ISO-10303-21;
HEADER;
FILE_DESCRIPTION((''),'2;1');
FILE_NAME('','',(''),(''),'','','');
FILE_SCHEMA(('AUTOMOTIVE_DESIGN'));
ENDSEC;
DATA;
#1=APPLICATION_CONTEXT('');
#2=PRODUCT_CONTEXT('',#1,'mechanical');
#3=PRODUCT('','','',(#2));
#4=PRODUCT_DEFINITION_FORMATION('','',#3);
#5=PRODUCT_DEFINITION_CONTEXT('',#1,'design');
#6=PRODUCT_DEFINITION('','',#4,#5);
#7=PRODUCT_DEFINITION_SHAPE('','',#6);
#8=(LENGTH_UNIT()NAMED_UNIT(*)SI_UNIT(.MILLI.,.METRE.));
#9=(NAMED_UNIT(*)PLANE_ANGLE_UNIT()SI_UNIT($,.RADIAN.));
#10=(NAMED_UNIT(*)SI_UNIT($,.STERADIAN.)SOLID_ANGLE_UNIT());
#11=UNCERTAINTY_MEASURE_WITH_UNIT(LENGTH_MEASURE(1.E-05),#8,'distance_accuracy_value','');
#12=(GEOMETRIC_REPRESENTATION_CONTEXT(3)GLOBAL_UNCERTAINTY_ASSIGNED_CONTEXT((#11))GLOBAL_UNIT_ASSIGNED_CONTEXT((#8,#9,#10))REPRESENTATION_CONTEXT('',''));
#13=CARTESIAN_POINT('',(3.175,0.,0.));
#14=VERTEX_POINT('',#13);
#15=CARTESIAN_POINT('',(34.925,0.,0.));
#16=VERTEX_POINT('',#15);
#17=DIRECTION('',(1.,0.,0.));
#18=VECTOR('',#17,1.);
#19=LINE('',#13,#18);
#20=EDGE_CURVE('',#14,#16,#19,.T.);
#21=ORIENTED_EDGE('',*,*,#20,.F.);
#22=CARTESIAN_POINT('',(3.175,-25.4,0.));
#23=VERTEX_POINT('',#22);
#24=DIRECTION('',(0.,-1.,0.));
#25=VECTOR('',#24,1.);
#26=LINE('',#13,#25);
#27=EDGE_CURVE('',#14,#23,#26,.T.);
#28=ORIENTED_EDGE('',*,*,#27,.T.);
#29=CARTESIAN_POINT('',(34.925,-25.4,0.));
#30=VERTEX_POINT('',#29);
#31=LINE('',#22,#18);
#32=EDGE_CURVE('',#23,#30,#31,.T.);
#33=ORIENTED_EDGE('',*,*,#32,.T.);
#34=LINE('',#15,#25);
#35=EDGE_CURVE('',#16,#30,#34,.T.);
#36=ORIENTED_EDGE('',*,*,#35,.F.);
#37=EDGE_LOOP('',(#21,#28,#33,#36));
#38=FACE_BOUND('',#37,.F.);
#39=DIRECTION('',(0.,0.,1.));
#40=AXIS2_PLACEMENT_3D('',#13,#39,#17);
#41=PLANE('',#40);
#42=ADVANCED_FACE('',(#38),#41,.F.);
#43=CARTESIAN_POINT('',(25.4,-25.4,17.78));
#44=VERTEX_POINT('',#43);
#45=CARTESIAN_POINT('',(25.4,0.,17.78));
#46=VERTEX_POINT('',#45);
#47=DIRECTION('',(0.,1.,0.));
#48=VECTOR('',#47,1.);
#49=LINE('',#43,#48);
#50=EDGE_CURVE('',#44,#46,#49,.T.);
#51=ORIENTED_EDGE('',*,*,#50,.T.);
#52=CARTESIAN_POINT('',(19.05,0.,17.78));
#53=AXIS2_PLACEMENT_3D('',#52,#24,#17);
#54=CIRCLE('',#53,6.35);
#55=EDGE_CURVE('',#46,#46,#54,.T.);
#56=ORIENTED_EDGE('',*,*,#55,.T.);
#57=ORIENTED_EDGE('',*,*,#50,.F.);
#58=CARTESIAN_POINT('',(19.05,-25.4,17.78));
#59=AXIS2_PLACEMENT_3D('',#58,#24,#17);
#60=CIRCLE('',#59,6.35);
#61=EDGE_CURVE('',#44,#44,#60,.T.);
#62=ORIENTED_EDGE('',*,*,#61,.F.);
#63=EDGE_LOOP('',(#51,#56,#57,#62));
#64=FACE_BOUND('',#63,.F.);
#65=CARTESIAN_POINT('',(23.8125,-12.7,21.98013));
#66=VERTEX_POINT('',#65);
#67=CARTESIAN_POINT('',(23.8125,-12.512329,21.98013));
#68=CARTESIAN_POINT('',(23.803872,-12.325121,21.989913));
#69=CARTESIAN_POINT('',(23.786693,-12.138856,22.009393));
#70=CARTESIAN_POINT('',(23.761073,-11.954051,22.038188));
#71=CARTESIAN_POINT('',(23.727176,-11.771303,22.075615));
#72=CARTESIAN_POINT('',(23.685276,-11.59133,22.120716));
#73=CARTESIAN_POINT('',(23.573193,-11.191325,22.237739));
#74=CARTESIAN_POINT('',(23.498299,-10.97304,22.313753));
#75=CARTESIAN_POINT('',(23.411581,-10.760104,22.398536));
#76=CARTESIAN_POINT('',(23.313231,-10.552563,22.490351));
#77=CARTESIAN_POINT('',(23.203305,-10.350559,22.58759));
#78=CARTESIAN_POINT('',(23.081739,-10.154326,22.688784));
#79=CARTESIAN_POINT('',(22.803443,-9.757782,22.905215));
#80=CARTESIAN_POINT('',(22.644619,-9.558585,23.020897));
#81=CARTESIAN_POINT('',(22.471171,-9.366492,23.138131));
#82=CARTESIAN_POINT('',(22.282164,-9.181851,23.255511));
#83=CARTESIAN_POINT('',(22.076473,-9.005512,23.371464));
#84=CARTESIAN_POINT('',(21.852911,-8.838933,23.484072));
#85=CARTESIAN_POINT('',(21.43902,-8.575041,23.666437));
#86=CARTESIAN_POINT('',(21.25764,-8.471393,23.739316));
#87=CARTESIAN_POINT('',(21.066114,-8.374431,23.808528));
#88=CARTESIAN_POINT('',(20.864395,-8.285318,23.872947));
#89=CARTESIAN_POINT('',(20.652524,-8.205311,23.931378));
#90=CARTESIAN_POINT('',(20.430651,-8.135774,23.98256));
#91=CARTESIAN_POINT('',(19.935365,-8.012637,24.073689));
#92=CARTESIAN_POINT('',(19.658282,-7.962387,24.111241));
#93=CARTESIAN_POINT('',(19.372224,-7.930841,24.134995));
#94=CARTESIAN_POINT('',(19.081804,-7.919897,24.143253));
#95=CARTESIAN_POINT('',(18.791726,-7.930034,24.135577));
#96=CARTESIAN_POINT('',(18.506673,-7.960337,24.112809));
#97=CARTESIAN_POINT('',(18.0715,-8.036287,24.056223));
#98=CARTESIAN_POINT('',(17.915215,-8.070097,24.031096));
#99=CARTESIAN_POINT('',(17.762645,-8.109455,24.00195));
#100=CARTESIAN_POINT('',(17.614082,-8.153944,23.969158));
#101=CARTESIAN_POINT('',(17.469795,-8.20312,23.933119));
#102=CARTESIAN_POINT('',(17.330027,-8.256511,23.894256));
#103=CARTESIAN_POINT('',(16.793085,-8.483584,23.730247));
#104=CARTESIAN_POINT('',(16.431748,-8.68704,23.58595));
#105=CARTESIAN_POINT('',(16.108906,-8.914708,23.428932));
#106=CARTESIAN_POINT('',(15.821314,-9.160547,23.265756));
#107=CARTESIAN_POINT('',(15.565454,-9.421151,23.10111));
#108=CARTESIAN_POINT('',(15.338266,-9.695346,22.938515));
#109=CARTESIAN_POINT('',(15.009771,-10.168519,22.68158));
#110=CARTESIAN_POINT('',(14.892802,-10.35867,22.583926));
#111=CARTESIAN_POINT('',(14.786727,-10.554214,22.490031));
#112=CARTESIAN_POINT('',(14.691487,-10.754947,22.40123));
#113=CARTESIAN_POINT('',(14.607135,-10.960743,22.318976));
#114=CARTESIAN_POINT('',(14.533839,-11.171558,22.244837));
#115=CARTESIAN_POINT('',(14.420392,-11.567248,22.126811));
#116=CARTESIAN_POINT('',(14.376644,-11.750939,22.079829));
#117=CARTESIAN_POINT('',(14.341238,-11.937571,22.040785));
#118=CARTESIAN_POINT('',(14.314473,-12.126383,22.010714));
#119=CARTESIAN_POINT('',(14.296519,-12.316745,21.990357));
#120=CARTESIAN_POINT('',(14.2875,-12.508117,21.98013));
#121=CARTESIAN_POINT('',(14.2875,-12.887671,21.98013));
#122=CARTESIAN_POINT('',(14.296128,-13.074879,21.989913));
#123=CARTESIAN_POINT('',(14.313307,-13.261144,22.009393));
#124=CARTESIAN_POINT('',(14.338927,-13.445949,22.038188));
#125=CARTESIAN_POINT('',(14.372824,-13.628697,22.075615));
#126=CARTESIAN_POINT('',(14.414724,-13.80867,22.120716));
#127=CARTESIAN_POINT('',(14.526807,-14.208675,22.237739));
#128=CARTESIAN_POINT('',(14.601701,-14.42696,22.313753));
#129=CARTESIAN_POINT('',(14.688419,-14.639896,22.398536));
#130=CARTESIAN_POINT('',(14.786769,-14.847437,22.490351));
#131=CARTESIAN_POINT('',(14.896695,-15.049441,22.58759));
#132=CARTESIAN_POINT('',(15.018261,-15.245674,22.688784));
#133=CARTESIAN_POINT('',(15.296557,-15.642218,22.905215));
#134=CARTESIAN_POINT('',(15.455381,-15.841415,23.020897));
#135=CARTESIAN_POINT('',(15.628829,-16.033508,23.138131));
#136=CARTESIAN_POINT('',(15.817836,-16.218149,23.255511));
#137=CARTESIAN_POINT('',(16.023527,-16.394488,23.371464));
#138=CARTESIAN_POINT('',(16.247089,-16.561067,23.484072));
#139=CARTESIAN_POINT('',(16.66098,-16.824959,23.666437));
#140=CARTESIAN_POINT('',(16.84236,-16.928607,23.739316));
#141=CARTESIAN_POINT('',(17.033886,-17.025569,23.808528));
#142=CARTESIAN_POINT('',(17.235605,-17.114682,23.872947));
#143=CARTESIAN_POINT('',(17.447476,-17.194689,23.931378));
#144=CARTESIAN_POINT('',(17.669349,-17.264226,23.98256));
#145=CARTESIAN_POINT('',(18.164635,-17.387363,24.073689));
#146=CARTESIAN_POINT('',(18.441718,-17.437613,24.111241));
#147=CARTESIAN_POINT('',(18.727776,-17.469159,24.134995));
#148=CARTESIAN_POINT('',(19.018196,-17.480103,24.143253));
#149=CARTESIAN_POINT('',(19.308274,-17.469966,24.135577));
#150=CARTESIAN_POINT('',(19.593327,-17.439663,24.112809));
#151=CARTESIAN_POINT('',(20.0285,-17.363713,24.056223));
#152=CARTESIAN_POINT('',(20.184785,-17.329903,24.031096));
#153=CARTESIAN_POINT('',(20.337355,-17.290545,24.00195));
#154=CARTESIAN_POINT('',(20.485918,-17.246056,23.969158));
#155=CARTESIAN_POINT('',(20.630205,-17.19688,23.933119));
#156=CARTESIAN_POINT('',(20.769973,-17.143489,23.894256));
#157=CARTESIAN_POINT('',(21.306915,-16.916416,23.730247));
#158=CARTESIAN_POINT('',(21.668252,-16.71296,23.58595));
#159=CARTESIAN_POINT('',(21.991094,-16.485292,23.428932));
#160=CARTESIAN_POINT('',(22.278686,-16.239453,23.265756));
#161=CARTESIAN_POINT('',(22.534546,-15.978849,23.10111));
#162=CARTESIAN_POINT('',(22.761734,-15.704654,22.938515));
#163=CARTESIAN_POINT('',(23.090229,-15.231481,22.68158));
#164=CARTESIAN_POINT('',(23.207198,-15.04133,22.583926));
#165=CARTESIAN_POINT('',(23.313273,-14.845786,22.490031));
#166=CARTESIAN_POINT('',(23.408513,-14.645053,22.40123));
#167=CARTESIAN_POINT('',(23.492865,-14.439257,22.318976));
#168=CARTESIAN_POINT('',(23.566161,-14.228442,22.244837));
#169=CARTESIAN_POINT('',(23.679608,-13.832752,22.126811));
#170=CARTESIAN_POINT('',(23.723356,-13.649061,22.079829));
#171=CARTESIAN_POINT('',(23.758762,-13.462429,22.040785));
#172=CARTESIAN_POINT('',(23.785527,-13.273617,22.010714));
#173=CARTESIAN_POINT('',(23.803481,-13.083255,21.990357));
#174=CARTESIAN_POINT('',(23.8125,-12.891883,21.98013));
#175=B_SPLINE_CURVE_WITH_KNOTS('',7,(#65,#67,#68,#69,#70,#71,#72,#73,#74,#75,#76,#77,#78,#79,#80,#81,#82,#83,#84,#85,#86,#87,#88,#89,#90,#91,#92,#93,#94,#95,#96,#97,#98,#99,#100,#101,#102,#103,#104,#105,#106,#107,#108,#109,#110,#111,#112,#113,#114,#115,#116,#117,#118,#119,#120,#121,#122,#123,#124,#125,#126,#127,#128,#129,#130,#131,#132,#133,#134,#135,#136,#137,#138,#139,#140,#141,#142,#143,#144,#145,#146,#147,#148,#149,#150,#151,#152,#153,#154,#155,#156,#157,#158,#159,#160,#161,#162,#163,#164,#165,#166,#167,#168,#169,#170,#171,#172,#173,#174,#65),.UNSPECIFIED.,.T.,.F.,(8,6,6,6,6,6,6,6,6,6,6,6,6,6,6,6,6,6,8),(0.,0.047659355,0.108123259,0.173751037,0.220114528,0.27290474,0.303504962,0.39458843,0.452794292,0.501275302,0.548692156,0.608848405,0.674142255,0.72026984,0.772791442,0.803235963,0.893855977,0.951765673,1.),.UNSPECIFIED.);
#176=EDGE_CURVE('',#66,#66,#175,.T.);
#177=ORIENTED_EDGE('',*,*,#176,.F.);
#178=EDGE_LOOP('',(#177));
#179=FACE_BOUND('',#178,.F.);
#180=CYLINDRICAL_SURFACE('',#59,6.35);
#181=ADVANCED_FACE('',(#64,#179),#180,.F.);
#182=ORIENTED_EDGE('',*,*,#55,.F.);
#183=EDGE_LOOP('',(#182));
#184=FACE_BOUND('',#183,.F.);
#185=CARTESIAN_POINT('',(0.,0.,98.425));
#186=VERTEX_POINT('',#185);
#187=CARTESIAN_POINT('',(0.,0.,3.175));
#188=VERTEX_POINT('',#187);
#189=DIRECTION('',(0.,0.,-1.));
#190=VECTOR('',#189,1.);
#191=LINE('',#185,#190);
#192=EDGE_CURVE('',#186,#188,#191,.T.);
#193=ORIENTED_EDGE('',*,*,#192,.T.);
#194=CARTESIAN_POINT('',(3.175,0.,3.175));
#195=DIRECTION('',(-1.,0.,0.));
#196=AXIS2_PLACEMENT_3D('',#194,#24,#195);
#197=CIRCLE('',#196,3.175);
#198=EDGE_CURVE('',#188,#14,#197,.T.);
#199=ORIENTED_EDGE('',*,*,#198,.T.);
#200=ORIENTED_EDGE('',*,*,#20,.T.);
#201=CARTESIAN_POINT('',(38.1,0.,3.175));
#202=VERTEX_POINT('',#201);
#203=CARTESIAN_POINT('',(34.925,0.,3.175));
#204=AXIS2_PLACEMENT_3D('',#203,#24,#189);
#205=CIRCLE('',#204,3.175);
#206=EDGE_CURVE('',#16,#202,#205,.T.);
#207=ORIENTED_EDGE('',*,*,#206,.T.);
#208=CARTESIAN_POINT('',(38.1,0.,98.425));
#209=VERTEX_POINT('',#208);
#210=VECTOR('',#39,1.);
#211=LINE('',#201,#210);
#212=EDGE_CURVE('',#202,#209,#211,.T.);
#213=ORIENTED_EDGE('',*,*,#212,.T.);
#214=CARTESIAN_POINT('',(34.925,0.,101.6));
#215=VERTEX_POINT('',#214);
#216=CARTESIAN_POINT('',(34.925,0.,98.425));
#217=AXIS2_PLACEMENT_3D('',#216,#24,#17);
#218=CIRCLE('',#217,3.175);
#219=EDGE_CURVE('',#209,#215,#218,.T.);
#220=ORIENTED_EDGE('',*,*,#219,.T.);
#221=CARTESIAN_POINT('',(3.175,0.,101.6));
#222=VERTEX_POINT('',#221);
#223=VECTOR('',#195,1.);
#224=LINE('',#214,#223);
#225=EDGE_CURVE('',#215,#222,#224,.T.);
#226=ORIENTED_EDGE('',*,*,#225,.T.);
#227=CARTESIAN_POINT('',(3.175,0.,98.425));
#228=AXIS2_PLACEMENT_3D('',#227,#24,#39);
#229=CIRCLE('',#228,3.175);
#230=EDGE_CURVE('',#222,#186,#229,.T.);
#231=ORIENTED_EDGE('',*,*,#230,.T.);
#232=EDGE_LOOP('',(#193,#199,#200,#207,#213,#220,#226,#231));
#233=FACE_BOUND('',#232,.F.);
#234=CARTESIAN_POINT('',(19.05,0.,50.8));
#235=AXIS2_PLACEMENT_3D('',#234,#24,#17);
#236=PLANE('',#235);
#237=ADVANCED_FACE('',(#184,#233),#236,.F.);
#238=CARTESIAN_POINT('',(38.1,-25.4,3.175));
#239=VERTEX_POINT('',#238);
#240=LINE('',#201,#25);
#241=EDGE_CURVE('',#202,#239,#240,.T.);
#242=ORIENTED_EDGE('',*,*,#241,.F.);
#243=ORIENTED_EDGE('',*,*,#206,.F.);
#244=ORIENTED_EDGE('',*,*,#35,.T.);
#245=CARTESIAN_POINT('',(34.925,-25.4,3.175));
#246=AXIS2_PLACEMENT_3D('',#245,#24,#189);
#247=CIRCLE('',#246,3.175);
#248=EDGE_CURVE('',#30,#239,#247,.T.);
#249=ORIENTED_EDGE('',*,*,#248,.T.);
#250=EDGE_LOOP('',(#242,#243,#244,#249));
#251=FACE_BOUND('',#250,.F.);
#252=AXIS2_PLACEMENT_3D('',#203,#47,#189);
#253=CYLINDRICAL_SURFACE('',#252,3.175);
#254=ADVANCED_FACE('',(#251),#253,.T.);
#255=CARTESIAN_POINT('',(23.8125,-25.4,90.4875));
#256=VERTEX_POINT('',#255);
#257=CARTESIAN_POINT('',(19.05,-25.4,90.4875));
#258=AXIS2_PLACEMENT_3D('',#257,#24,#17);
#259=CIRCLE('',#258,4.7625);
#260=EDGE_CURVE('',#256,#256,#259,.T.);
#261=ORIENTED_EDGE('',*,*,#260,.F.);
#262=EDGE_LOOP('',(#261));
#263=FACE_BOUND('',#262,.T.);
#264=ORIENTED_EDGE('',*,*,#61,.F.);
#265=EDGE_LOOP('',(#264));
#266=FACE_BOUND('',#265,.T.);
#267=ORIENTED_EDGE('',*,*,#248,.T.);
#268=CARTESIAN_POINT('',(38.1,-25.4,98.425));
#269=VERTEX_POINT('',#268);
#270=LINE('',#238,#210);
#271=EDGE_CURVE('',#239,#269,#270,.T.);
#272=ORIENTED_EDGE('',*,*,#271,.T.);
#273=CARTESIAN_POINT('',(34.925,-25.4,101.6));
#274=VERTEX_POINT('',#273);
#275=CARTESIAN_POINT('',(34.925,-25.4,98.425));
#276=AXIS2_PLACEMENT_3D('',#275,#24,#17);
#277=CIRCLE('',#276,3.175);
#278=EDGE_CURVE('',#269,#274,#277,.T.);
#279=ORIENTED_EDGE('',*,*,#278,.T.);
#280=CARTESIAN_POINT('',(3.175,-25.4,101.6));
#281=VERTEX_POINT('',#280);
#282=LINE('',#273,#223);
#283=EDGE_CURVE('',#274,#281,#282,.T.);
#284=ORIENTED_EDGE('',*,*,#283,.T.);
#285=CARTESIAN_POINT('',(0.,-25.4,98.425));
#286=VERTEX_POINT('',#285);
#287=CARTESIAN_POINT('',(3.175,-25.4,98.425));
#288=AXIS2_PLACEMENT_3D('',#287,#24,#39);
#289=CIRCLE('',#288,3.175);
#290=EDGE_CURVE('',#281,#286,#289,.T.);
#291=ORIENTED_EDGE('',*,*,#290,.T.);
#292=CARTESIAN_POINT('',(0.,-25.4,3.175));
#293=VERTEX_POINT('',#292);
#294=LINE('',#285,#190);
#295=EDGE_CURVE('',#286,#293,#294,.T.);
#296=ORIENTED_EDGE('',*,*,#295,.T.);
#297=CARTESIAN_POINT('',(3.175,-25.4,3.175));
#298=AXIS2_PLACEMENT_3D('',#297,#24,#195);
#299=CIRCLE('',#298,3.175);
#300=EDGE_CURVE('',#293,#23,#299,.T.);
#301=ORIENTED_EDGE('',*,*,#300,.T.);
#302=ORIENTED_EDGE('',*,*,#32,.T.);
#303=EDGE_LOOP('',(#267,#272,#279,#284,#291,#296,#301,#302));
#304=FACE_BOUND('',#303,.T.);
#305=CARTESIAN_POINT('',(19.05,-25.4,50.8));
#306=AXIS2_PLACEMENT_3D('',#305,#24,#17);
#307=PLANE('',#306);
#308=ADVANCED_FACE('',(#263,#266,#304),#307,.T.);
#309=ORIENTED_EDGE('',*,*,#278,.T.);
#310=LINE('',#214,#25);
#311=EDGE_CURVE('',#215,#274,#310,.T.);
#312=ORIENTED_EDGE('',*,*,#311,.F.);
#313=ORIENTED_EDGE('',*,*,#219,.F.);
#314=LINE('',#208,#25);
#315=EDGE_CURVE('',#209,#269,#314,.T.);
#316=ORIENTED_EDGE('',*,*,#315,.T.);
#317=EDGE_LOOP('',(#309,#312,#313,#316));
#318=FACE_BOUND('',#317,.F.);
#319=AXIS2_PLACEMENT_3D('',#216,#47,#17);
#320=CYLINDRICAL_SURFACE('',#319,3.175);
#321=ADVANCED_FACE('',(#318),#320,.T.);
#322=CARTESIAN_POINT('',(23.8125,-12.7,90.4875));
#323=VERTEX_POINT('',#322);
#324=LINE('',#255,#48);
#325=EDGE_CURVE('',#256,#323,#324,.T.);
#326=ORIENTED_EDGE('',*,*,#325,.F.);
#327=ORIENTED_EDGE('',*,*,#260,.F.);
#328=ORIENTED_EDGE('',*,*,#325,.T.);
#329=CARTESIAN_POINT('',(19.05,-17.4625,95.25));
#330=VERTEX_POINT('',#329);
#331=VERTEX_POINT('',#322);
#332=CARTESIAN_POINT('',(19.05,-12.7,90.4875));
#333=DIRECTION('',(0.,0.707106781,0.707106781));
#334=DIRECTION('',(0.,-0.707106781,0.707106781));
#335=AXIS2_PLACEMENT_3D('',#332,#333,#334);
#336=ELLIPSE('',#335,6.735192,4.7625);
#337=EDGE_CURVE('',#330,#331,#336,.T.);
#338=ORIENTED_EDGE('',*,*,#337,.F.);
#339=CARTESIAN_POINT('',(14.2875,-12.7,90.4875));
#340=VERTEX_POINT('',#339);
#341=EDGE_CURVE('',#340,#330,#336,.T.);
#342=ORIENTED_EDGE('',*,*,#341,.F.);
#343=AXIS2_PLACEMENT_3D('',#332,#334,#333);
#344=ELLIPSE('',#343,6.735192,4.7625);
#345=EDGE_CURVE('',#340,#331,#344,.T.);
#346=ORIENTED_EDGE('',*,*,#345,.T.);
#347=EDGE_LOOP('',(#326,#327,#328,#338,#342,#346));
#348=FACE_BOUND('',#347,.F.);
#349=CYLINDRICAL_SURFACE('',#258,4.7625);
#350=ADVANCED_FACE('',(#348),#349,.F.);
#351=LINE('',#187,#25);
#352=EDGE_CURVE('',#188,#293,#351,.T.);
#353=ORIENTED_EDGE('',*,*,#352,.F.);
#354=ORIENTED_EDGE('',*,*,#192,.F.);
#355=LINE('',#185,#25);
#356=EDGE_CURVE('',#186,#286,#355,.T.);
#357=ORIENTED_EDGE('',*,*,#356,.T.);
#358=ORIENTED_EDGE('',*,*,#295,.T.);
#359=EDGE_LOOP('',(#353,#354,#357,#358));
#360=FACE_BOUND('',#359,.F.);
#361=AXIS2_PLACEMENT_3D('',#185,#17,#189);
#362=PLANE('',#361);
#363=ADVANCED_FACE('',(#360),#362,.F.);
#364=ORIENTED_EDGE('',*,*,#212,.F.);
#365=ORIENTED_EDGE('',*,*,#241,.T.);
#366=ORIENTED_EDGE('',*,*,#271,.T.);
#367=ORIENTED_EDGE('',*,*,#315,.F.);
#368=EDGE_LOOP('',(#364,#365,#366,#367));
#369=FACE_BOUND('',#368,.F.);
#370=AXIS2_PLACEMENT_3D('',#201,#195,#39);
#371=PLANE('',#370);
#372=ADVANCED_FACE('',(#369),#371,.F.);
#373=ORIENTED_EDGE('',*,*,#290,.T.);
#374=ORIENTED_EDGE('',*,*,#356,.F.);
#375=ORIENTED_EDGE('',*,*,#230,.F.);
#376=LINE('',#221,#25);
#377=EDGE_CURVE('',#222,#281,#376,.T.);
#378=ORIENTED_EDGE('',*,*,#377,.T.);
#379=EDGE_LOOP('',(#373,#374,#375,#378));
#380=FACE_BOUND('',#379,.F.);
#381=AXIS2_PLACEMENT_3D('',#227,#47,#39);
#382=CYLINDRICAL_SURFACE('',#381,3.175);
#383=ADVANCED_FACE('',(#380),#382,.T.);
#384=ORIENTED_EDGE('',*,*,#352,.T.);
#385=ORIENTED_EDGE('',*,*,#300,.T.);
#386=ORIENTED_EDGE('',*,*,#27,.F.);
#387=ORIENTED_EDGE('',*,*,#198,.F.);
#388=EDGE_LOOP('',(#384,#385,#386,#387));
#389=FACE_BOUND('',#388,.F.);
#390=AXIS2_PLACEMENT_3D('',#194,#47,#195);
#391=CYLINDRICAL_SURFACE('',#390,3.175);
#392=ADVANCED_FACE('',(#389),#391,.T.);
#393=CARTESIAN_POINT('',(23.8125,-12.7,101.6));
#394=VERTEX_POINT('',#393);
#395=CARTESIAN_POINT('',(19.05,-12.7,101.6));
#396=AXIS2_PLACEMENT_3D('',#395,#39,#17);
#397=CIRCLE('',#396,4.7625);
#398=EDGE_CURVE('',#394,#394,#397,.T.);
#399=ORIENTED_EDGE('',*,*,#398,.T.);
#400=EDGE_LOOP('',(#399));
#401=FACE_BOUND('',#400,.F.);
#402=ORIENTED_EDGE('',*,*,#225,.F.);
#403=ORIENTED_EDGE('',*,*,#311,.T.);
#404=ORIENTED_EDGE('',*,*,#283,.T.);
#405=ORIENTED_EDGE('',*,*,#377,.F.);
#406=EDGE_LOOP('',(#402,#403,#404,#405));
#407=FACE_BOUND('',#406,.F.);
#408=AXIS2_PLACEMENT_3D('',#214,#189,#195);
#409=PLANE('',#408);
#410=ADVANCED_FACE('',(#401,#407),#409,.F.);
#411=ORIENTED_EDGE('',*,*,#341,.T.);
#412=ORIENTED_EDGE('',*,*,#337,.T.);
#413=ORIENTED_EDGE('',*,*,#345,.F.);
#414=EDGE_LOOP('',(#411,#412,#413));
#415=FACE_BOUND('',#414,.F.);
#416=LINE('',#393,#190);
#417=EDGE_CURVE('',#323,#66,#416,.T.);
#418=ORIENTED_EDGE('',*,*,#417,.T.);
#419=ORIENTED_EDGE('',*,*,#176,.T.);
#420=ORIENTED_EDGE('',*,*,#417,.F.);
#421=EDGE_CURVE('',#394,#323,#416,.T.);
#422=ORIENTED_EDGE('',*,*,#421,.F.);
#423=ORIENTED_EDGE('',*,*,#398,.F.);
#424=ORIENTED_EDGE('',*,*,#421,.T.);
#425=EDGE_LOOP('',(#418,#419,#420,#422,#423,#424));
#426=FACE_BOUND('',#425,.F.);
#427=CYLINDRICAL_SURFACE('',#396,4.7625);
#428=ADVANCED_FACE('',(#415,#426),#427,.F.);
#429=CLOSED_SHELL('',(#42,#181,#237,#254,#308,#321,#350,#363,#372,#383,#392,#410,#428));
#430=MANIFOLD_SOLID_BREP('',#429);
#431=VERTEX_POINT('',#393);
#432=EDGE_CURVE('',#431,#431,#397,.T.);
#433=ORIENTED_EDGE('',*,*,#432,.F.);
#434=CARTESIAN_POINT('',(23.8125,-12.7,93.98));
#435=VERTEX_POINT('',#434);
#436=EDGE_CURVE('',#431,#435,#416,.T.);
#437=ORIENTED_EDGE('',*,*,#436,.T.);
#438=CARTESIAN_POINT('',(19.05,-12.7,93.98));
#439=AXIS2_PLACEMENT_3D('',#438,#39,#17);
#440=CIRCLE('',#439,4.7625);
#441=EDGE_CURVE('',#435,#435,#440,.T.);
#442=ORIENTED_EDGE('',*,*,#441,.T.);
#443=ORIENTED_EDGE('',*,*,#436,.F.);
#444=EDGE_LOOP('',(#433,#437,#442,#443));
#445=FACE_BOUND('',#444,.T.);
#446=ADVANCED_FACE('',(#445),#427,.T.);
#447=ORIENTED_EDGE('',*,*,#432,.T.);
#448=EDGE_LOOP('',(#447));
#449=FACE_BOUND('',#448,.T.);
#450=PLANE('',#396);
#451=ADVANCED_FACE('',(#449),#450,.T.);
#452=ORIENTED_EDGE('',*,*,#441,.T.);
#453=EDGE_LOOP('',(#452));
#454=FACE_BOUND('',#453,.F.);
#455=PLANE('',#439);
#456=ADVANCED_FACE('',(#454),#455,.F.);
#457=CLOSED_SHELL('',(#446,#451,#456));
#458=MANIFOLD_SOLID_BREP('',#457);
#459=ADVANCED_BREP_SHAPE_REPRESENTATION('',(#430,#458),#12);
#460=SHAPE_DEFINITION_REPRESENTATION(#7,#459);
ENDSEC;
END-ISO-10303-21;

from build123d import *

# Parameters (mm, degrees)
F1_DEPTH = 25.4
F2_R     = 6.35
F3_DEPTH = 127
F4_R     = 4.7625
F5_DEPTH = 81.28
F7_R     = 4.7625
F8_DEPTH = 7.62
F6_R     = 4.7625
F9_DEPTH = 12.7


with BuildPart() as f1:
    # F0 (on Front) → F1 (new body)
    with BuildSketch(Plane.XZ):
        with BuildLine():
            ThreePointArc((0, 3.175), (0.9299359697, 0.9299359697), (3.175, 0))
            Line((3.175, 0), (34.925, 0))
            ThreePointArc((34.925, 0), (37.1700640303, 0.9299359697), (38.1, 3.175))
            Line((38.1, 3.175), (38.1, 98.425))
            ThreePointArc((38.1, 98.425), (37.1700640303, 100.6700640303), (34.925, 101.6))
            Line((34.925, 101.6), (3.175, 101.6))
            ThreePointArc((3.175, 101.6), (0.9299359697, 100.6700640303), (0, 98.425))
            Line((0, 98.425), (0, 3.175))
        make_face()
    extrude(amount=F1_DEPTH)

    # F2 (on face) → F3 (cut)
    with BuildSketch(Plane.XZ.offset(25.4)):
        with Locations((19.05, 17.78)):
            Circle(F2_R)
    extrude(amount=-F3_DEPTH, mode=Mode.SUBTRACT)

    # F4 (on face) → F5 (cut)
    with BuildSketch(Plane.XY.offset(101.6)):
        with Locations((19.05, -12.7)):
            Circle(F4_R)
    extrude(amount=-F5_DEPTH, mode=Mode.SUBTRACT)

    # F6 (on face) → F9 (cut)
    with BuildSketch(Plane.XZ.offset(25.4)):
        with Locations((19.05, 90.4875)):
            Circle(F6_R)
    extrude(amount=-F9_DEPTH, mode=Mode.SUBTRACT)


with BuildPart() as f8:
    # F7 (on face) → F8 (new body)
    with BuildSketch(Plane.XY.offset(101.6)):
        with Locations((19.05, -12.7)):
            Circle(F7_R)
    extrude(amount=-F8_DEPTH)


solid = Compound([f1.part, f8.part])
